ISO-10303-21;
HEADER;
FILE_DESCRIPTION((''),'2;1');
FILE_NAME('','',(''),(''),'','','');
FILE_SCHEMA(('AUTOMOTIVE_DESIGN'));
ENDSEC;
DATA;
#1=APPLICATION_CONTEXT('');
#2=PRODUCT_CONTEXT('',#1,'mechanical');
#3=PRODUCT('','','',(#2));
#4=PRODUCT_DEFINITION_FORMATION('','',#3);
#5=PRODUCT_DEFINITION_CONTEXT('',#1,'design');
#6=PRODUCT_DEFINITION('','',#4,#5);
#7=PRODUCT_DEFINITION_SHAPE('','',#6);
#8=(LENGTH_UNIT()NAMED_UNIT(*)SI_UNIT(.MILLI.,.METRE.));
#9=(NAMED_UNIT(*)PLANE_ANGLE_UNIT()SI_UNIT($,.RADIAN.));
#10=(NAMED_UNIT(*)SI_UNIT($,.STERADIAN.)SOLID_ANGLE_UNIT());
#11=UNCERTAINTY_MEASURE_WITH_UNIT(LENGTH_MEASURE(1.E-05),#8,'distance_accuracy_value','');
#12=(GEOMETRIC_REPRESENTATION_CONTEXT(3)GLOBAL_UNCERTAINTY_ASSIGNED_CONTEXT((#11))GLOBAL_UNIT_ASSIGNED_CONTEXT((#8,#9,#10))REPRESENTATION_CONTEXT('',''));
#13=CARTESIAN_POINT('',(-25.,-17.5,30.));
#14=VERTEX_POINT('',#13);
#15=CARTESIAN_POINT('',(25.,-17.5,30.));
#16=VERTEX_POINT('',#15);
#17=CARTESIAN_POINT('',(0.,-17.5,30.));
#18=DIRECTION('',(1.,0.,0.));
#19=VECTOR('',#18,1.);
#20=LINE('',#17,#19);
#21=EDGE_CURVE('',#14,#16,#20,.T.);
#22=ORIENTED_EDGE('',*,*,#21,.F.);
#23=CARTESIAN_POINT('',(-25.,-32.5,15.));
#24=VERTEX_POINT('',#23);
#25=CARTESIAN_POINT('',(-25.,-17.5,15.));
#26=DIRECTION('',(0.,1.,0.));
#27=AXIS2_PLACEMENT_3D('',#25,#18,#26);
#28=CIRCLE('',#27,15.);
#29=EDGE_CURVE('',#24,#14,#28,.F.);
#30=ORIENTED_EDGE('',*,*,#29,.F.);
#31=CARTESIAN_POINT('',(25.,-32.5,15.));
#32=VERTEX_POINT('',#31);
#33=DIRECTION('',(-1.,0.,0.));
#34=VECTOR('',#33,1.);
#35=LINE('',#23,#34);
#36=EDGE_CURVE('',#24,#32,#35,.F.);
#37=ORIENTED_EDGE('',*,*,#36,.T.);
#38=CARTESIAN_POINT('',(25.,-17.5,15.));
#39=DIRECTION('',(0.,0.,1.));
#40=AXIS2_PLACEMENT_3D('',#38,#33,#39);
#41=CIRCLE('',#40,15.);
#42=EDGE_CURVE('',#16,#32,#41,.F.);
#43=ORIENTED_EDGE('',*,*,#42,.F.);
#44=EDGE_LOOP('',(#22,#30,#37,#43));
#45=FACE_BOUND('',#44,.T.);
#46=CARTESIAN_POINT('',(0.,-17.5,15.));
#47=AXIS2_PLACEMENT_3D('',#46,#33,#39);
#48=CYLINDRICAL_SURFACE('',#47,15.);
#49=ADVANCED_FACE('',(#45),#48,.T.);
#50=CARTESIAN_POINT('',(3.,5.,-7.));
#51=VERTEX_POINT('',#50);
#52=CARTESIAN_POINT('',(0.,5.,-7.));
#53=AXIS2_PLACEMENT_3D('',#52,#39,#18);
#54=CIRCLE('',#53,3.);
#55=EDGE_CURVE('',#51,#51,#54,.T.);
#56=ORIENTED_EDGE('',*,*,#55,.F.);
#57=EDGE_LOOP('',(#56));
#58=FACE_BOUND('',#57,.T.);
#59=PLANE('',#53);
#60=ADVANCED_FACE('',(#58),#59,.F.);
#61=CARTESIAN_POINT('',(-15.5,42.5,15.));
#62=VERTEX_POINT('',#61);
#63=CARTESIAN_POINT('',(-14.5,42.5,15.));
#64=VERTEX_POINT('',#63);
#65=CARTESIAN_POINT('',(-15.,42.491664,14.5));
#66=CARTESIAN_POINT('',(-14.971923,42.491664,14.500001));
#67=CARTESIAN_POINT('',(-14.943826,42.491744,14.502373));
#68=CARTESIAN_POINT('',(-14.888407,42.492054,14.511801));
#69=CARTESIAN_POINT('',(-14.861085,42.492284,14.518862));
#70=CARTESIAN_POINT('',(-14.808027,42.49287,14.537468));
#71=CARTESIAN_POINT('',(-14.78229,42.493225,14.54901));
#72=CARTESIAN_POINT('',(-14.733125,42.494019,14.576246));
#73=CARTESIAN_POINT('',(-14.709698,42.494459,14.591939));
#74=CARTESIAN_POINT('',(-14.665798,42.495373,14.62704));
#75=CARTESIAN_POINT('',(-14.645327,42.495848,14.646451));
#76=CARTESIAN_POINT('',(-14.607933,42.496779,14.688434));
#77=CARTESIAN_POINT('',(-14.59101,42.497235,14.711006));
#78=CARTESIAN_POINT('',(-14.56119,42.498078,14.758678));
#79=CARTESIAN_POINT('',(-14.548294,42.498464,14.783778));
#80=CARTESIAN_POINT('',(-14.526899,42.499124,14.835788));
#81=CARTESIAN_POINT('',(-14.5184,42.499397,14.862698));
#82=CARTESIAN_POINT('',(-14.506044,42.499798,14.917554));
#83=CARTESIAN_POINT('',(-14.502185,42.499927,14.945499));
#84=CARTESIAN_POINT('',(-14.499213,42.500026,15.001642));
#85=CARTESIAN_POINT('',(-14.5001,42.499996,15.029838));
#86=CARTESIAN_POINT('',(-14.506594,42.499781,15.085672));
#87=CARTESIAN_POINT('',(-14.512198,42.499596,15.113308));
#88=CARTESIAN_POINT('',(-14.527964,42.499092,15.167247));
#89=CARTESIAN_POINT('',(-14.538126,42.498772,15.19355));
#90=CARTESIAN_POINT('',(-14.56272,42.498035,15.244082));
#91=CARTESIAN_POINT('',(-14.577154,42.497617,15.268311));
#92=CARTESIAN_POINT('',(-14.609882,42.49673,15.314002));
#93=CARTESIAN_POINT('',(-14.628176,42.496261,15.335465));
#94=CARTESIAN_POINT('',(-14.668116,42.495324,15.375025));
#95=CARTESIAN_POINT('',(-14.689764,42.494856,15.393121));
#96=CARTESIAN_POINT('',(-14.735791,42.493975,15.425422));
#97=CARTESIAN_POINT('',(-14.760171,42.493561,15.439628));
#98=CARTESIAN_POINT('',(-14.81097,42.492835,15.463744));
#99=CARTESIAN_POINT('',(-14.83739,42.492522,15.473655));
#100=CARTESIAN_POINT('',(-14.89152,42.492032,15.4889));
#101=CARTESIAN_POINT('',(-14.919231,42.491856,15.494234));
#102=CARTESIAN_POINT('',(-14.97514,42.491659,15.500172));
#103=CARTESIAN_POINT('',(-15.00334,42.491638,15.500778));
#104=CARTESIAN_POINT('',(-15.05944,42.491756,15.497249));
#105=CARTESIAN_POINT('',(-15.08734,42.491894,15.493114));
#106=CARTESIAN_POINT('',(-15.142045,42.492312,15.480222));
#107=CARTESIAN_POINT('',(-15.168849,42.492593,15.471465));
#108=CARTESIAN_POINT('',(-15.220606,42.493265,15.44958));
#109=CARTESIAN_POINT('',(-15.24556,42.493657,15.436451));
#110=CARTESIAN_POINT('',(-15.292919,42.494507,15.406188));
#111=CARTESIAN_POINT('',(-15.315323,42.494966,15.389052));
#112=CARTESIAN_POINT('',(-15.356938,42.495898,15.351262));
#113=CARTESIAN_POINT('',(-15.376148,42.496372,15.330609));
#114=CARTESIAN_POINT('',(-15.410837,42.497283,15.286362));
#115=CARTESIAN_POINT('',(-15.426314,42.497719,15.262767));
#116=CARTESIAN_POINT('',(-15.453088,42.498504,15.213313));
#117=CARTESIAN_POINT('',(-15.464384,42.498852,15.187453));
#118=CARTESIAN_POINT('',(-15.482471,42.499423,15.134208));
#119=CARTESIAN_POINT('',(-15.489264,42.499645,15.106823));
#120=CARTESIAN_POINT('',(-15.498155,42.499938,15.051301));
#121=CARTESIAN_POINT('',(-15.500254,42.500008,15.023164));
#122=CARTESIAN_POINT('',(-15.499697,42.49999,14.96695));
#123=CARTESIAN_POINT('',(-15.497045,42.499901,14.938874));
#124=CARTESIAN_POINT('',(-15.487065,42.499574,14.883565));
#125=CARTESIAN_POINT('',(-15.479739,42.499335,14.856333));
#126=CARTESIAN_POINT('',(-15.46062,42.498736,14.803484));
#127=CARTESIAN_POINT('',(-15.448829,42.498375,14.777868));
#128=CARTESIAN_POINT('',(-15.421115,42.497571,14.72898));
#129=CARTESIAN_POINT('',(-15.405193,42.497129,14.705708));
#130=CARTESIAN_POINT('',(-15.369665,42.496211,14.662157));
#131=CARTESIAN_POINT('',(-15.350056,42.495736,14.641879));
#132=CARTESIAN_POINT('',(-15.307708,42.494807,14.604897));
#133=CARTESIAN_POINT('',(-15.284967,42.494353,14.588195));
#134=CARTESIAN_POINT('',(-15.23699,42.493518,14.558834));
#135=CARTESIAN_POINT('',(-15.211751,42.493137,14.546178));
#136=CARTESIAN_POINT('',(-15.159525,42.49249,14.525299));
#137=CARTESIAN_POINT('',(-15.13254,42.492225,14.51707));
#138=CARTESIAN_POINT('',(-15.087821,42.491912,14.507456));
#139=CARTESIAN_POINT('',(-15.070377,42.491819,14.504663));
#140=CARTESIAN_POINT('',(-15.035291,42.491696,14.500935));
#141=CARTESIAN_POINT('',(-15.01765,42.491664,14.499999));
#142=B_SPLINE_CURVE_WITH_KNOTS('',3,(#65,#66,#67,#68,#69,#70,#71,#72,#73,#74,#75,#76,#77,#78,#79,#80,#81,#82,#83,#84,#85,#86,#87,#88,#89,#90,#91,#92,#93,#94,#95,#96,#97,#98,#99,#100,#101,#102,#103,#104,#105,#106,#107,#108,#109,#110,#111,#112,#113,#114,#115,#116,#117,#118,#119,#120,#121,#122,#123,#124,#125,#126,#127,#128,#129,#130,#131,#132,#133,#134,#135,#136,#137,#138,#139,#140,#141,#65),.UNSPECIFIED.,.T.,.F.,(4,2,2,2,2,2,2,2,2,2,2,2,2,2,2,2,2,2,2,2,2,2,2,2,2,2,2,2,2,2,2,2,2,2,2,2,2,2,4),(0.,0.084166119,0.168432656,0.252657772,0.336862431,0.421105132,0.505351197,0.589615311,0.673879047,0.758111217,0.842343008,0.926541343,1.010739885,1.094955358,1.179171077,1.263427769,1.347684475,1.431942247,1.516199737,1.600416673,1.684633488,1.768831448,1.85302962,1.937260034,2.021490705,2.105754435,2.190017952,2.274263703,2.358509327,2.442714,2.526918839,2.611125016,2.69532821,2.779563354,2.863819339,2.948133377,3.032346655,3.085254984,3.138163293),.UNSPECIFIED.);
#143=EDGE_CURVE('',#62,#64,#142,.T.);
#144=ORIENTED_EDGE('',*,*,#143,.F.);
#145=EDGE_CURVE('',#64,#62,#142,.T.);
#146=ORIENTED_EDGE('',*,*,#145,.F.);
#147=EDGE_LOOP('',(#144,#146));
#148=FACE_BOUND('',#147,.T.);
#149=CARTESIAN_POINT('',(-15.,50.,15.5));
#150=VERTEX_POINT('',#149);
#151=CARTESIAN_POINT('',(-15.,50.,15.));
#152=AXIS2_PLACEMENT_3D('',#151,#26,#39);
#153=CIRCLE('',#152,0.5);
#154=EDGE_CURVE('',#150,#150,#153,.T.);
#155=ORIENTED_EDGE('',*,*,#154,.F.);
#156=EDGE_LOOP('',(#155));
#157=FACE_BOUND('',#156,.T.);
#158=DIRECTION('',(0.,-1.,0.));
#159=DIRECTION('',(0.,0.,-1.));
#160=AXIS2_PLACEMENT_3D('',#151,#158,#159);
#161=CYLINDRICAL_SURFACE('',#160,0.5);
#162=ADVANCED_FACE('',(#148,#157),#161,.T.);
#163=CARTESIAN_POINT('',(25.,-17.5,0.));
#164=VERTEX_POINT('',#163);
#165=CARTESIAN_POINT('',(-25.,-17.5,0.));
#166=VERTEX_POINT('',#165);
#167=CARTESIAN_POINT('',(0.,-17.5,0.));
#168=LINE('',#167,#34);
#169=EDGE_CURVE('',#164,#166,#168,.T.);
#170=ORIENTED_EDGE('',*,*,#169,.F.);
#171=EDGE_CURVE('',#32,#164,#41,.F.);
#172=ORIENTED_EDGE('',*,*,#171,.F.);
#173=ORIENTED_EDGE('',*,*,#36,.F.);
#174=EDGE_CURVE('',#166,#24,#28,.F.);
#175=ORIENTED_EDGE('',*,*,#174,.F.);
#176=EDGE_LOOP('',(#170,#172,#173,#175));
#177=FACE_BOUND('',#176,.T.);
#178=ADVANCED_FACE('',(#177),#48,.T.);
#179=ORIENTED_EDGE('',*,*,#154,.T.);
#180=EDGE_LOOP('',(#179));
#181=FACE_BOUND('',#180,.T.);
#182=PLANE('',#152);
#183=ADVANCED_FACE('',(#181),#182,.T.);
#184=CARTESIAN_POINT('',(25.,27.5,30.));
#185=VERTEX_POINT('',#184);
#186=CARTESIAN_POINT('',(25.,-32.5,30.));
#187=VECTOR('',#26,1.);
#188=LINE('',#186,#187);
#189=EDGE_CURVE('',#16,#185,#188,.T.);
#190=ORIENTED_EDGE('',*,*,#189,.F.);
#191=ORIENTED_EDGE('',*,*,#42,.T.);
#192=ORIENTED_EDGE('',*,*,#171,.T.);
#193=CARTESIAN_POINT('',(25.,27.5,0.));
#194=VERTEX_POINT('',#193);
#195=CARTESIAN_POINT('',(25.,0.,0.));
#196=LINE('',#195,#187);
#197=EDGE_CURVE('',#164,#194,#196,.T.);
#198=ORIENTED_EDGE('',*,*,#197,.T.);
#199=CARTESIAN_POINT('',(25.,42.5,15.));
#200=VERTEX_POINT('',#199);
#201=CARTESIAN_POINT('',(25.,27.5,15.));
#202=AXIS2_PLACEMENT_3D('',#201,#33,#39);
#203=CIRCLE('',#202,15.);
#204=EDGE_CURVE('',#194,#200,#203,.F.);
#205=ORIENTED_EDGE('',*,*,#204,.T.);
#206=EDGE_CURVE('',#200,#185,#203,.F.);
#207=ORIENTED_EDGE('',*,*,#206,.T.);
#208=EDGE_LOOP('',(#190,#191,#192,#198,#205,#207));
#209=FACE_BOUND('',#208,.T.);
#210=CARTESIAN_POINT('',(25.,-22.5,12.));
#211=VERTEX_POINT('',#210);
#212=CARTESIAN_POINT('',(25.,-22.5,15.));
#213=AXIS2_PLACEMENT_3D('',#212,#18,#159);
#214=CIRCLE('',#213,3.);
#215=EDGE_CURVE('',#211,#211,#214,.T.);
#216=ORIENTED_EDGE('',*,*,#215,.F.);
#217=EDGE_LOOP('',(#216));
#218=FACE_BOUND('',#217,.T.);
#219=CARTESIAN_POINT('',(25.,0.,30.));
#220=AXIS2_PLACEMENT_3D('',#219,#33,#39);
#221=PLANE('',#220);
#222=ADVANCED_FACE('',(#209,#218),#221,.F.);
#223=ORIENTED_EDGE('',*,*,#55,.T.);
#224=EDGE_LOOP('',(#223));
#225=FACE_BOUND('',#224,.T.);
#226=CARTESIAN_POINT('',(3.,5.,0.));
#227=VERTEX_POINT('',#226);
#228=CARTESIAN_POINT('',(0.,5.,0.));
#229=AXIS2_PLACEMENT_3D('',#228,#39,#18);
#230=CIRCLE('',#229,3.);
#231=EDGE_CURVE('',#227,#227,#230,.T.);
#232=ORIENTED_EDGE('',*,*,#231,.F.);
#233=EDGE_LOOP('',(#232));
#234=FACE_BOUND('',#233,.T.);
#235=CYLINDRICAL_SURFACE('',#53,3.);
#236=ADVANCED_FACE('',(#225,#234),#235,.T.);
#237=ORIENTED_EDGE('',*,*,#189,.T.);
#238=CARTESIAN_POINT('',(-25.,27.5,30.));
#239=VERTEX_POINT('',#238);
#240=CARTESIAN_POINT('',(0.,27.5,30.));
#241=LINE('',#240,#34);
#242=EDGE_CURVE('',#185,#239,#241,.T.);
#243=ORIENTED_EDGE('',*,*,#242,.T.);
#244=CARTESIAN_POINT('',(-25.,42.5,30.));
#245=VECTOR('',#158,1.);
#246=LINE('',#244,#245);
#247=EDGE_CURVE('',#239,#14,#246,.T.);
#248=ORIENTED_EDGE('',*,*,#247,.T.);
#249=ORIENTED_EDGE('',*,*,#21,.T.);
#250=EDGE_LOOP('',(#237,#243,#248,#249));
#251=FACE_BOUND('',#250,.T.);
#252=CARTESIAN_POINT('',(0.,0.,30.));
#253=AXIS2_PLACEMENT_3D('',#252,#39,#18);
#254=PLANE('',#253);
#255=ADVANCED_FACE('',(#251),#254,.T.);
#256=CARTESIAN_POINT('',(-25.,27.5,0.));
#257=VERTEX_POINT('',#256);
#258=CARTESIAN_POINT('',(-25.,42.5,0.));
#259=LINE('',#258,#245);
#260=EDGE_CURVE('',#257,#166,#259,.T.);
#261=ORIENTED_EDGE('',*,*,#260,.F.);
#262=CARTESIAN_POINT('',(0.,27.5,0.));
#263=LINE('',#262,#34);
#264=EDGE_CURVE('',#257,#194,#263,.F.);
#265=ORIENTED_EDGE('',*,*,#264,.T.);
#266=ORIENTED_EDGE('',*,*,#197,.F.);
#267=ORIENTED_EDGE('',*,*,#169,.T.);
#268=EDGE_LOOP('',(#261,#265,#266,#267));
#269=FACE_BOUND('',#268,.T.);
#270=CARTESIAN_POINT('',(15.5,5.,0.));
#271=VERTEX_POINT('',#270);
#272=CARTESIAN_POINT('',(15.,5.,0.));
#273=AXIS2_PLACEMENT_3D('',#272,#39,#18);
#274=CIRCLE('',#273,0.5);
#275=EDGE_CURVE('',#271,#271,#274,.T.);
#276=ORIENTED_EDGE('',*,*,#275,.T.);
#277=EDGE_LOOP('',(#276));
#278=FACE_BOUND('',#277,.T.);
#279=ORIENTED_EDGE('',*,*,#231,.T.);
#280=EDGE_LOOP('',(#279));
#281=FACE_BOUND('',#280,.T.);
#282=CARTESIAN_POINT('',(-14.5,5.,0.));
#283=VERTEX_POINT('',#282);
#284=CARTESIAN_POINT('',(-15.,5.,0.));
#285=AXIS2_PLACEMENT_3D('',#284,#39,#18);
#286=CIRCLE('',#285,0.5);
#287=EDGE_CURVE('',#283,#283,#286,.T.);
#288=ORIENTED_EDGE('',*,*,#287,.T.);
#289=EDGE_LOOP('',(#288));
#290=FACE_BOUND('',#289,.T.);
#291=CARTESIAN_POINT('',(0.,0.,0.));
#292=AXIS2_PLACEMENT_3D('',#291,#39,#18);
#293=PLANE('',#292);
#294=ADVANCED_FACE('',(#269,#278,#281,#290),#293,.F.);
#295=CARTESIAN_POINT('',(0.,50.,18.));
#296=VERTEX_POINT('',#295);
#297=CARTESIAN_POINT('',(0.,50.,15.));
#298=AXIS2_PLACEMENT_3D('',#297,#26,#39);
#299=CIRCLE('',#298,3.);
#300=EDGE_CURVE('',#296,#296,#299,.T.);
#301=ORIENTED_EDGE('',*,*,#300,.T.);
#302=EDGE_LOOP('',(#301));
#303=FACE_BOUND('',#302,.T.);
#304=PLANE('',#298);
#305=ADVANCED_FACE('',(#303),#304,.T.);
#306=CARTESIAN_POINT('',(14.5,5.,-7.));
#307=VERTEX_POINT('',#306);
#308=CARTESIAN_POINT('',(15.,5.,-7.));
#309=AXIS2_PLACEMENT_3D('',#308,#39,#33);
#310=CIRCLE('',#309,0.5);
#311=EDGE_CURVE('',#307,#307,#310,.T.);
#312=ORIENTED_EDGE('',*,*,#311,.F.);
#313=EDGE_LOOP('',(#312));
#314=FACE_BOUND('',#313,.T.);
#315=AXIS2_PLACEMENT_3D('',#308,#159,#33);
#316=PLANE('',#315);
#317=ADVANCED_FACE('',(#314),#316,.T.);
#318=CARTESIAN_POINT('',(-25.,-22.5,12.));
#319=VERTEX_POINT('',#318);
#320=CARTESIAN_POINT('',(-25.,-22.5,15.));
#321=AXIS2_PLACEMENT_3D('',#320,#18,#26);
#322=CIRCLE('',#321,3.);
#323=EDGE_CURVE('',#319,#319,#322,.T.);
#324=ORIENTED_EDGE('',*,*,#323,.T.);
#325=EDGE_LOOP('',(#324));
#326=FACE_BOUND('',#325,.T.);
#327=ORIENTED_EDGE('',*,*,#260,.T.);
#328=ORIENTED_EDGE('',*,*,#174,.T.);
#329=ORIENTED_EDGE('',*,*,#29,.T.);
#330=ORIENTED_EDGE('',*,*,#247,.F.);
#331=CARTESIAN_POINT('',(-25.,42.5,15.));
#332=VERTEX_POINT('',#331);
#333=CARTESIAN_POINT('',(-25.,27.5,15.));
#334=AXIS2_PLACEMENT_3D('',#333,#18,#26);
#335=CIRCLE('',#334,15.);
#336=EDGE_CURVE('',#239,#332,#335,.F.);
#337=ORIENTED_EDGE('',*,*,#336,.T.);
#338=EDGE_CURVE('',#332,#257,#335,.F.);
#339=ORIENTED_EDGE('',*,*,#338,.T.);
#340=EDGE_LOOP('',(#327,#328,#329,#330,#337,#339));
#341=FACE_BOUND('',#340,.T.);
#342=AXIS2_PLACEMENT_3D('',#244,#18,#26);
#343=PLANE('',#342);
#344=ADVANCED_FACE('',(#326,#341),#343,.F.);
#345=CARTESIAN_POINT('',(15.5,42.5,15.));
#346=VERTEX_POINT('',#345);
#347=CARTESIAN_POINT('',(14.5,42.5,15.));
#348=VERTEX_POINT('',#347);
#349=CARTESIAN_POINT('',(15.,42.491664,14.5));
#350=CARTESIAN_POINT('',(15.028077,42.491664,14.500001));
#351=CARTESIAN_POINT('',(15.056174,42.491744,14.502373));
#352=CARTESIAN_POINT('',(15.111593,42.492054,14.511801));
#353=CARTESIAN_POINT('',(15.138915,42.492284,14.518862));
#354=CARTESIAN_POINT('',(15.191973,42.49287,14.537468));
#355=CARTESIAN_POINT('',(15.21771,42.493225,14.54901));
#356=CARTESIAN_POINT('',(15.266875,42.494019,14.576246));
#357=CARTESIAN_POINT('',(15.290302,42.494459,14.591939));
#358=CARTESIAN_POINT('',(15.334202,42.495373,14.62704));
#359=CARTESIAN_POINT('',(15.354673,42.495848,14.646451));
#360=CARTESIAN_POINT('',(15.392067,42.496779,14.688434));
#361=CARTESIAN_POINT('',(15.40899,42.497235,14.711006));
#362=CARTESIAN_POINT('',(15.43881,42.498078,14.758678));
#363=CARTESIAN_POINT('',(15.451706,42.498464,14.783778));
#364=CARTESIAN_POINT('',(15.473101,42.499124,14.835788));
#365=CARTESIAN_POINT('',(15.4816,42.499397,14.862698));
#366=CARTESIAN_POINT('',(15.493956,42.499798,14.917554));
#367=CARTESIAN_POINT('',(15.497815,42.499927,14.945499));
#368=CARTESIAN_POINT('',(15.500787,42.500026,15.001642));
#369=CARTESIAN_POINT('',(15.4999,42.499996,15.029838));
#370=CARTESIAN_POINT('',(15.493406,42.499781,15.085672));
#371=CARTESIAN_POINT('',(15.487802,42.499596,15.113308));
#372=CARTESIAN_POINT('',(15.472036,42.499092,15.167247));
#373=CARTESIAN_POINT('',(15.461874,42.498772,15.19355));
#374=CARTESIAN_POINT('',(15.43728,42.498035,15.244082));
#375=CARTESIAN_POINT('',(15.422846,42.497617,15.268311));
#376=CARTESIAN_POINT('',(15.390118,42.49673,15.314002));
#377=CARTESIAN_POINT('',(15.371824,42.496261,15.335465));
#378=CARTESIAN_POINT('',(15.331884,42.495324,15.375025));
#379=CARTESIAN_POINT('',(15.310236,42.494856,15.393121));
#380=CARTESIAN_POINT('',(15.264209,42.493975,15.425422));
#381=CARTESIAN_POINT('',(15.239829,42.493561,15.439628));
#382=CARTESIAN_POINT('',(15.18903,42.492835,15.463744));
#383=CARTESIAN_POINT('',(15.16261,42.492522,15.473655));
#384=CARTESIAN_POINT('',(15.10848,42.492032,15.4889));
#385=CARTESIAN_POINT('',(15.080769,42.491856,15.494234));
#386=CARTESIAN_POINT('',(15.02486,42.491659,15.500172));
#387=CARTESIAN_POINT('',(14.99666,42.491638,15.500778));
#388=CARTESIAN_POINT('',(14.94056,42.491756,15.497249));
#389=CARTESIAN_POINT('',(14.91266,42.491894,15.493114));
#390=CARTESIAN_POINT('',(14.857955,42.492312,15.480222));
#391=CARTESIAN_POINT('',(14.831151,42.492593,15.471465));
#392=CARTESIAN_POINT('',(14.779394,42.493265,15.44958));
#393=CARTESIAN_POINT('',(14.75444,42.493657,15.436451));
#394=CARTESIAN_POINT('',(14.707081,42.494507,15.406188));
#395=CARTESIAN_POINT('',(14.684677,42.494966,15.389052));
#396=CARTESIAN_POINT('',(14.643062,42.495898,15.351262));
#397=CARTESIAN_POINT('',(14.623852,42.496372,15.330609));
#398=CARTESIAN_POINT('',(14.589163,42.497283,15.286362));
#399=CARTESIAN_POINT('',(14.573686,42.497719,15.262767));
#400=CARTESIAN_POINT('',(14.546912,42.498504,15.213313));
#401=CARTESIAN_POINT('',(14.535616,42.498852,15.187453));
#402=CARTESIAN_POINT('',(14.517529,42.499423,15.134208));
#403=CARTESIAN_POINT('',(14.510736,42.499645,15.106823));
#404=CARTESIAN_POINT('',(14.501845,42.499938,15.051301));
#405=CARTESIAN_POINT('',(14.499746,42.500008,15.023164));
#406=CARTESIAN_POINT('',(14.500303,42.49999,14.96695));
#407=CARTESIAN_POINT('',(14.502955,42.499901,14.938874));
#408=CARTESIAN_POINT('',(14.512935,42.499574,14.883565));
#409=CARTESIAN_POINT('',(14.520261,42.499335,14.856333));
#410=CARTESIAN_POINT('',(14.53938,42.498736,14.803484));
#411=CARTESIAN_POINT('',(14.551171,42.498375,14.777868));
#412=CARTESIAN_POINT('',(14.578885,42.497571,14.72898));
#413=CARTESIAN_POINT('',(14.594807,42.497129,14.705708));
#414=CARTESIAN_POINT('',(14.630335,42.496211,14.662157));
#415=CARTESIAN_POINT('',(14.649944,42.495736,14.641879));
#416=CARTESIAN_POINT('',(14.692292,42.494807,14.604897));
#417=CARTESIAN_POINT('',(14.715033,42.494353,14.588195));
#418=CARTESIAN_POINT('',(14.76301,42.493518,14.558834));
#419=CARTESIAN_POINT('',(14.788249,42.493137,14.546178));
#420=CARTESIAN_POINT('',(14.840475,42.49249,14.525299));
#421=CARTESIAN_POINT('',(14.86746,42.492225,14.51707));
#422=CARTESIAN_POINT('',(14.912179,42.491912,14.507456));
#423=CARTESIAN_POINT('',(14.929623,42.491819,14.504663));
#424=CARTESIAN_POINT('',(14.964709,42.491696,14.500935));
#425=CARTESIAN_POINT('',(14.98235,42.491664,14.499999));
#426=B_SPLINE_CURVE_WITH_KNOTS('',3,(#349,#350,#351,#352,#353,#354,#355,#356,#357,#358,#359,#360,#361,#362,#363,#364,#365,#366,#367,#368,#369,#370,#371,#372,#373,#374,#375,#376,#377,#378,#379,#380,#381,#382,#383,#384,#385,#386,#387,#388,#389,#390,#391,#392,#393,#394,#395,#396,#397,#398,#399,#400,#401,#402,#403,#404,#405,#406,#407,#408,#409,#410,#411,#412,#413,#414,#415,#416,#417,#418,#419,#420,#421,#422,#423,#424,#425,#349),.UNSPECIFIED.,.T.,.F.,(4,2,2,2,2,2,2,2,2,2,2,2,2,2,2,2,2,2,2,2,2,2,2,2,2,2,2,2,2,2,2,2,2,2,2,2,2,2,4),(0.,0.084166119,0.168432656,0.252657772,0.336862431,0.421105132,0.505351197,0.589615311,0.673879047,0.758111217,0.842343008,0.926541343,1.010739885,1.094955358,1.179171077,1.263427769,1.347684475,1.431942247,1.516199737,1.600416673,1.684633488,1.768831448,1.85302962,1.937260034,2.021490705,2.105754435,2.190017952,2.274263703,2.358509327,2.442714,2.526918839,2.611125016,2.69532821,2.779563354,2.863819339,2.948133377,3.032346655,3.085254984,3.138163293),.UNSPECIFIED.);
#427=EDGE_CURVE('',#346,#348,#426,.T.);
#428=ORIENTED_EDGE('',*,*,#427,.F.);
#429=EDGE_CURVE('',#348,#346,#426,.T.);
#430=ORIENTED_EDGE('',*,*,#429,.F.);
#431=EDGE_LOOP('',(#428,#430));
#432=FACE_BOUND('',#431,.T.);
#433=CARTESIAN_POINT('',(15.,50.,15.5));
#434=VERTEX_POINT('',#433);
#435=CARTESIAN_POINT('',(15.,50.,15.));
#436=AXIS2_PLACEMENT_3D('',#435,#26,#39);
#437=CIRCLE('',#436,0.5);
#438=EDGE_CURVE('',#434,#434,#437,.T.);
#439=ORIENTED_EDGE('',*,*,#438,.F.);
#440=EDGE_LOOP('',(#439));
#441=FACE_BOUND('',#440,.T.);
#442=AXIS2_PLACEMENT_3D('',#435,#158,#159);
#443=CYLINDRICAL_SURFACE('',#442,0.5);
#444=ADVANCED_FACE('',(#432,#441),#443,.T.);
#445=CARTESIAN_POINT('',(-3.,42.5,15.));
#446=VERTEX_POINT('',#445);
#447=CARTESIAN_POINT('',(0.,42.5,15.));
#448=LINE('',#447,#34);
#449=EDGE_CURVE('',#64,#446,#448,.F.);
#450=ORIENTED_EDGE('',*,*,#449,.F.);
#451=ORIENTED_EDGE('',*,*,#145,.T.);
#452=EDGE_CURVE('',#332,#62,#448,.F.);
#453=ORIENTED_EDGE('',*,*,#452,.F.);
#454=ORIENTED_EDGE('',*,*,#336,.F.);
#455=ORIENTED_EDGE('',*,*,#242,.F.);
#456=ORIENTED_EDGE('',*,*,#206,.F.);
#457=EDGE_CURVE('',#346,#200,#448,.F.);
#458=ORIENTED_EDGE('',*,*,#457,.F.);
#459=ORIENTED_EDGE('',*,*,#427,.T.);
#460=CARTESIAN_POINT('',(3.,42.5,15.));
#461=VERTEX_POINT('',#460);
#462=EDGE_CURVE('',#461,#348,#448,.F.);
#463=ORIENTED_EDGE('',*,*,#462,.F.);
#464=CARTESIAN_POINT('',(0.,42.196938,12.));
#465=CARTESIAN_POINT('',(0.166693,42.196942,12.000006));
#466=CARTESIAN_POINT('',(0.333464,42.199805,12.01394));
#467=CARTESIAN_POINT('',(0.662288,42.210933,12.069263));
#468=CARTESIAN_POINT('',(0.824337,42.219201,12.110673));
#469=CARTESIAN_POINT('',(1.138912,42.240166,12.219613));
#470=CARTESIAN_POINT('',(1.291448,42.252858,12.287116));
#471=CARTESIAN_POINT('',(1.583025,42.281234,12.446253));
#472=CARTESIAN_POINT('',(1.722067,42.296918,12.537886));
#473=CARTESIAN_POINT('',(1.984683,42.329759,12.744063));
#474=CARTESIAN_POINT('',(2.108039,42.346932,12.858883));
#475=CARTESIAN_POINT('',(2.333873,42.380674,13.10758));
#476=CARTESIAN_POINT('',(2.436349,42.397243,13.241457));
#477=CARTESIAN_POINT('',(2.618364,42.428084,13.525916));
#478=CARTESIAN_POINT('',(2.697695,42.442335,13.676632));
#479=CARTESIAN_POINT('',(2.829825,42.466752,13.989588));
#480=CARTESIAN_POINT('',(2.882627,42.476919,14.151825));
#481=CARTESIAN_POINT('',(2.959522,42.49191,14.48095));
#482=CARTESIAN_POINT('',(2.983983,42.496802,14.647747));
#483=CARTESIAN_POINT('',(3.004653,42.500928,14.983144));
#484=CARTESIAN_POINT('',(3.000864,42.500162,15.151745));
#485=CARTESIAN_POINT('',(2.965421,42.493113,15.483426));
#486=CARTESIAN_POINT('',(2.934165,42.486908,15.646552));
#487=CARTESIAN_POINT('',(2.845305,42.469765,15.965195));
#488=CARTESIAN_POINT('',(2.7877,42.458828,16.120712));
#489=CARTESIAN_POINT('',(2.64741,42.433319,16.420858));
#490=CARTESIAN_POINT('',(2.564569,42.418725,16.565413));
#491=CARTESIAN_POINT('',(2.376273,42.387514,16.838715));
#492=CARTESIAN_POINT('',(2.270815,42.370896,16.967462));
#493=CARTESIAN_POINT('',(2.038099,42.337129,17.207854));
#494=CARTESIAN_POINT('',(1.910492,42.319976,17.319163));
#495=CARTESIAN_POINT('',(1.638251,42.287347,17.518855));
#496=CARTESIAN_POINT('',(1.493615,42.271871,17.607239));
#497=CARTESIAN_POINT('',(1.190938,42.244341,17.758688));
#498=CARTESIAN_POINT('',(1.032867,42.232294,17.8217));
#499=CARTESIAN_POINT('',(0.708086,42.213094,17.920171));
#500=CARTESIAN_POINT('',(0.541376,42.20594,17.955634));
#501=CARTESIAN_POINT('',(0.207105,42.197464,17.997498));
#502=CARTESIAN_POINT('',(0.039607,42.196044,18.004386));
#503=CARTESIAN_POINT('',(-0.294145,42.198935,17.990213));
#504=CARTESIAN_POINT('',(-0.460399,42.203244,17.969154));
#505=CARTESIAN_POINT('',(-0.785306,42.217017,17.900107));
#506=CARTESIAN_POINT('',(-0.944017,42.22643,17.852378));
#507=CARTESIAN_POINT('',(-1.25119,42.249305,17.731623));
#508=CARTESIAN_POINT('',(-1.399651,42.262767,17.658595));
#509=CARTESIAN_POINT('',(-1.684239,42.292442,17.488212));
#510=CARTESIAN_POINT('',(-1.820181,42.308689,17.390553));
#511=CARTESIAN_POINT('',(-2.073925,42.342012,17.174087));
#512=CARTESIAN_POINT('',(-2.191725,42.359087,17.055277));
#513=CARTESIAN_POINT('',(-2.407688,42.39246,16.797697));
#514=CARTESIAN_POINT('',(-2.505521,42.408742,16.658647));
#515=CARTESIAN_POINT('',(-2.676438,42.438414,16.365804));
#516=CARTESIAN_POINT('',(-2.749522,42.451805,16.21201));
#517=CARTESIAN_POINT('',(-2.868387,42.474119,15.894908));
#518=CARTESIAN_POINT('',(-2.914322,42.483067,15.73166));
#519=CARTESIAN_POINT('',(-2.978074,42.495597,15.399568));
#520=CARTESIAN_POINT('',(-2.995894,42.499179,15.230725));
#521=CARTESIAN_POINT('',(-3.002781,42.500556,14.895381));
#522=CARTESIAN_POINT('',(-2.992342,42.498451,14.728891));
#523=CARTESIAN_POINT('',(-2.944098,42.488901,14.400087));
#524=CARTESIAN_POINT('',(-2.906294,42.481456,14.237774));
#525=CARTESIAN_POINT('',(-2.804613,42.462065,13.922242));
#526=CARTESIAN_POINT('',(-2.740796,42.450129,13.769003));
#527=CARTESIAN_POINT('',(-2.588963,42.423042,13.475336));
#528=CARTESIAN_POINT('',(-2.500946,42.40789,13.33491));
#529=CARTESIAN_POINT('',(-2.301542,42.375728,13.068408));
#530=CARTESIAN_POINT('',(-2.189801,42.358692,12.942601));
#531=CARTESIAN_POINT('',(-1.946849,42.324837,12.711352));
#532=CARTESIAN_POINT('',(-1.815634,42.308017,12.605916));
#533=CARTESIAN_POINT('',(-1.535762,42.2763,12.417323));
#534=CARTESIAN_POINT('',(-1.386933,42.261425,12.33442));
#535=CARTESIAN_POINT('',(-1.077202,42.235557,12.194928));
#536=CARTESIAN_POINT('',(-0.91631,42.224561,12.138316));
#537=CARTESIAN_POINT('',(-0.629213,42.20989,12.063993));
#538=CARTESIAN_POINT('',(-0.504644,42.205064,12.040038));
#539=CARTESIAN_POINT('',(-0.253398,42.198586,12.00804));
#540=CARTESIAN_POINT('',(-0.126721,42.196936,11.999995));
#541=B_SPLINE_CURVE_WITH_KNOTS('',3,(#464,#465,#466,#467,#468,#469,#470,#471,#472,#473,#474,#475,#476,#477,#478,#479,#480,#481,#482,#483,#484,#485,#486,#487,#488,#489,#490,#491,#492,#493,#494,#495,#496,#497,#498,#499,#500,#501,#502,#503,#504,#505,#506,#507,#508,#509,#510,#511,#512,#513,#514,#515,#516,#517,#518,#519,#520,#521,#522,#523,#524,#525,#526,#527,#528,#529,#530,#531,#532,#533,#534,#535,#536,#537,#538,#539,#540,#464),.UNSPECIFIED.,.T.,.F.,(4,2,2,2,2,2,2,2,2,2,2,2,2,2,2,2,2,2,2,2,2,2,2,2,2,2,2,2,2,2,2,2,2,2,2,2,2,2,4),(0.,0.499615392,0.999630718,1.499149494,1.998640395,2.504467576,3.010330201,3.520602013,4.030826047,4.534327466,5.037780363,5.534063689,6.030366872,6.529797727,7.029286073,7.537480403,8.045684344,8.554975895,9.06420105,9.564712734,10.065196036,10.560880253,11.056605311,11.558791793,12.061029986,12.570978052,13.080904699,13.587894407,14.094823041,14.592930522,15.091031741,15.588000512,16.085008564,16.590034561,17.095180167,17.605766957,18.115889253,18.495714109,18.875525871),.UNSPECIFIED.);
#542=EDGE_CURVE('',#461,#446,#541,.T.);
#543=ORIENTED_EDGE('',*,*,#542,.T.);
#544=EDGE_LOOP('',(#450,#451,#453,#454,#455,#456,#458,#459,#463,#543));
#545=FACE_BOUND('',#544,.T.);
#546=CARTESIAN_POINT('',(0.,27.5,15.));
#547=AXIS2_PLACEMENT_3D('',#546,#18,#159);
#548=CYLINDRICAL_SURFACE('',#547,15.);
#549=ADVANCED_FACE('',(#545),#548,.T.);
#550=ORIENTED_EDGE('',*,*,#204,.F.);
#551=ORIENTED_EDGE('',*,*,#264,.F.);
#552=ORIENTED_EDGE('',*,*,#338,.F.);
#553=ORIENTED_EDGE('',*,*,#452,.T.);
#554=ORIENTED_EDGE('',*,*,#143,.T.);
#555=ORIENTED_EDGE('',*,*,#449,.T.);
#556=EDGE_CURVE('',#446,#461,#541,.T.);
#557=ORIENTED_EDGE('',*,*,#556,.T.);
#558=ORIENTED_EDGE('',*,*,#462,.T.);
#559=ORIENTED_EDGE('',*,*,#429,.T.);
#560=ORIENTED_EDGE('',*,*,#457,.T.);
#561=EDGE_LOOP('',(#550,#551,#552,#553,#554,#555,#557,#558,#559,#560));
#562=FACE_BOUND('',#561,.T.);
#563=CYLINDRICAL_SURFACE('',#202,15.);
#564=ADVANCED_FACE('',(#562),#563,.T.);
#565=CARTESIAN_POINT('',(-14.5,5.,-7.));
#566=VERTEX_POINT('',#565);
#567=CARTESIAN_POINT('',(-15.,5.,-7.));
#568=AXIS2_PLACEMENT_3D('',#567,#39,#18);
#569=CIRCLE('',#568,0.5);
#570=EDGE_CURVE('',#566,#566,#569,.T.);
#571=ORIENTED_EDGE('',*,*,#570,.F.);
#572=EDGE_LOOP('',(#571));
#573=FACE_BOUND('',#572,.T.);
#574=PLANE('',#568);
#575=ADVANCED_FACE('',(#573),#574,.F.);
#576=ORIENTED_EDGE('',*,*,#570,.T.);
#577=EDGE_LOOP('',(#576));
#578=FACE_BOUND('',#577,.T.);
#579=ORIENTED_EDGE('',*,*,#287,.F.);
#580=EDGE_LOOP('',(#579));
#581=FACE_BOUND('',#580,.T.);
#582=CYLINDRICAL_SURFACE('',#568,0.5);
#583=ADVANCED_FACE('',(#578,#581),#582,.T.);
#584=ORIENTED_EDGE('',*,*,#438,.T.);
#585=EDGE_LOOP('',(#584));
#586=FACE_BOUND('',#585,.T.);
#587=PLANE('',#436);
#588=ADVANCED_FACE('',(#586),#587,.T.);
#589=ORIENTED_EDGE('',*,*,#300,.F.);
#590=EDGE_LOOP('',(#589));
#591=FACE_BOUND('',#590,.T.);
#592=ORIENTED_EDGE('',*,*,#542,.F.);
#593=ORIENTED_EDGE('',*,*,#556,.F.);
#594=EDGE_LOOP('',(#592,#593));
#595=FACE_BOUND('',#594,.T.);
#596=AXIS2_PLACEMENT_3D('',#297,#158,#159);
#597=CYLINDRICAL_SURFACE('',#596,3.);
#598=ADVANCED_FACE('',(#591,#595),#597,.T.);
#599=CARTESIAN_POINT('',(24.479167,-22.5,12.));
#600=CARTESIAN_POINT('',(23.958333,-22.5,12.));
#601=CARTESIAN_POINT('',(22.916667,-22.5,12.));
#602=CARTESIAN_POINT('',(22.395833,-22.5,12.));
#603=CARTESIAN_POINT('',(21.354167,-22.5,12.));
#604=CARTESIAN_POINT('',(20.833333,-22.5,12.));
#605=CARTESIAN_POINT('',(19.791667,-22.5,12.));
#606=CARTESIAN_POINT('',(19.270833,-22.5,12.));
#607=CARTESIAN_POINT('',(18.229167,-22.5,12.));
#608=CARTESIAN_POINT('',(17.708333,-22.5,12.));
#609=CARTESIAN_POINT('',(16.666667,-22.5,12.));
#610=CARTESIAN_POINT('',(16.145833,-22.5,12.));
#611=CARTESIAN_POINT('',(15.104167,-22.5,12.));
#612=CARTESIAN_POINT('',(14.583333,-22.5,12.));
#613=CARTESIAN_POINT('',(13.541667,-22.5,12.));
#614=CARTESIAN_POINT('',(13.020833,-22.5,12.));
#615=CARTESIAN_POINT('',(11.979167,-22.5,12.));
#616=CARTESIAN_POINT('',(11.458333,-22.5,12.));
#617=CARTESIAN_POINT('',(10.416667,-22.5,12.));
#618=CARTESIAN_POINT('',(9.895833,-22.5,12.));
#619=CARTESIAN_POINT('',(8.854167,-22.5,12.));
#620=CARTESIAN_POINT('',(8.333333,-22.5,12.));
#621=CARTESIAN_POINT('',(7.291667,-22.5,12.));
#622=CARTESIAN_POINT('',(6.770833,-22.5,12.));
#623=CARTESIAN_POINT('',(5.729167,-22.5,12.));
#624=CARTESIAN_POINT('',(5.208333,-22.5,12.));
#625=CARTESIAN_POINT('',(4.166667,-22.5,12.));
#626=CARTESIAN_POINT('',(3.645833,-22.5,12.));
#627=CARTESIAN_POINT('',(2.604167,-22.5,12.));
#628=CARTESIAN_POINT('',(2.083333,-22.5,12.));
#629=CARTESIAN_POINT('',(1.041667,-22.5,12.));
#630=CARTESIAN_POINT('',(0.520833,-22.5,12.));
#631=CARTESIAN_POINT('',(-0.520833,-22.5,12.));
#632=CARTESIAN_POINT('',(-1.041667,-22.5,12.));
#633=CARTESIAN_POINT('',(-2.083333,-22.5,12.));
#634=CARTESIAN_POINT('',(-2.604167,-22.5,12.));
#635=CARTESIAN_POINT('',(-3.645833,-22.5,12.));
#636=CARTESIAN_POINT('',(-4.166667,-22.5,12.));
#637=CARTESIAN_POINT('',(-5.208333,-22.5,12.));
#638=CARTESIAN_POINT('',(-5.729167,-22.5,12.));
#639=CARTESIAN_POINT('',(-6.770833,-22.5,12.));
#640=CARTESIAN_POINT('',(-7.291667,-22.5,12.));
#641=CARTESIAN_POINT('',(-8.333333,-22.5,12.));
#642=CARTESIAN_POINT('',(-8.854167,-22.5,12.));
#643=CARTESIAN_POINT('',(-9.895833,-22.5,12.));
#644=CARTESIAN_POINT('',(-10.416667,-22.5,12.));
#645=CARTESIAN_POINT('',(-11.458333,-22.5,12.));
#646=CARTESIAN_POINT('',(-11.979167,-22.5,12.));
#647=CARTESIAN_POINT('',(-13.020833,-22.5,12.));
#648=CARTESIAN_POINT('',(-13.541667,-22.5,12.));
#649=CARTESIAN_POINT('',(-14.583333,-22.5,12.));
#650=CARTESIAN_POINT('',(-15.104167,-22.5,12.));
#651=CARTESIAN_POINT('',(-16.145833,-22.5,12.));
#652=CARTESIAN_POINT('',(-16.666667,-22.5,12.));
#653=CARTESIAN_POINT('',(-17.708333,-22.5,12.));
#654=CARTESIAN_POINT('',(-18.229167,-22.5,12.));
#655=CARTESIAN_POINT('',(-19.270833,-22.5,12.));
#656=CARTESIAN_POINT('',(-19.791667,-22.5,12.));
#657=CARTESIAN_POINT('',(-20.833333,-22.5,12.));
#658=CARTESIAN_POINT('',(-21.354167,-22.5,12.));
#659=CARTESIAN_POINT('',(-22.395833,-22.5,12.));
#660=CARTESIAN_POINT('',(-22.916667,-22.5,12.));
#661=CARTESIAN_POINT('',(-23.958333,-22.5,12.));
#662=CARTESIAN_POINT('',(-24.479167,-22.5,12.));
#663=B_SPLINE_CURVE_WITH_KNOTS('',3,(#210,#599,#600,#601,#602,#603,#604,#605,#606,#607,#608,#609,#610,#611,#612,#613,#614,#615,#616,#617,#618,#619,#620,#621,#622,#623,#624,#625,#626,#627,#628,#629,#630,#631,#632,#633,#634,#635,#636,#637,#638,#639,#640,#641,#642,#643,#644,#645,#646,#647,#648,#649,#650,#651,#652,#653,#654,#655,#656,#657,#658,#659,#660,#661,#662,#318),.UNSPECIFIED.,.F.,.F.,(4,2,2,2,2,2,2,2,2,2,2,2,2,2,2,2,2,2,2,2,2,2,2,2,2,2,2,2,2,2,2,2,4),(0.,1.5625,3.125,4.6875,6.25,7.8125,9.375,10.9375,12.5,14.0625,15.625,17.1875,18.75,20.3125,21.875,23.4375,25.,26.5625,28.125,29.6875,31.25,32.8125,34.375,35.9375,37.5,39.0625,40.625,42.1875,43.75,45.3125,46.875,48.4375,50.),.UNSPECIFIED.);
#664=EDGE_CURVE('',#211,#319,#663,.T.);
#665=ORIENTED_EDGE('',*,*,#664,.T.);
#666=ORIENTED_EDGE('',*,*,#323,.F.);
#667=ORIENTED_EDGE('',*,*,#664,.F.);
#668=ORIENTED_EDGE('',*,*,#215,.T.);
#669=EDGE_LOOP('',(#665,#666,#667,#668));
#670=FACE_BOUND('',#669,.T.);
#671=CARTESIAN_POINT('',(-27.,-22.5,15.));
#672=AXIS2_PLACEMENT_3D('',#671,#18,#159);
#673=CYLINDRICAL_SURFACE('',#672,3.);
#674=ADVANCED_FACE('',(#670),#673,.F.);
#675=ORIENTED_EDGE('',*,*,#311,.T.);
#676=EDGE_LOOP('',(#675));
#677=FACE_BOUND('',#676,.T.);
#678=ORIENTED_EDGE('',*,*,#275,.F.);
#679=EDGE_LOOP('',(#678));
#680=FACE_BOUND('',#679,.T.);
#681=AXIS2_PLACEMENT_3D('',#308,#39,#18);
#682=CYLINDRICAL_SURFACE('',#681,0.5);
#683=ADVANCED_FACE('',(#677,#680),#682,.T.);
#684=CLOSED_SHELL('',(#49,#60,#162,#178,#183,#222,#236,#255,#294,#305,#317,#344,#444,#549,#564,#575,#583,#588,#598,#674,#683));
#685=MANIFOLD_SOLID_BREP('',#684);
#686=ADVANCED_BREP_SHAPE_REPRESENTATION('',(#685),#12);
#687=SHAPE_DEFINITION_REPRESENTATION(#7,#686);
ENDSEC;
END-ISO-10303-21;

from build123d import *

# Parameters (mm, degrees)
EXTRUDE_1_DEPTH     = 30
SKETCH_2_R          = 3
CUT_EXTRUDE_1_DEPTH = 52
FILLET_1_R          = 15
FILLET_2_R          = 15
FILLET_3_R          = 15
FILLET_4_R          = 15
SKETCH_4_R          = 3
SKETCH_4_R_2        = 0.5
EXTRUDE_2_DEPTH     = 50
SKETCH_5_R          = 3
SKETCH_5_R_2        = 0.5
EXTRUDE_3_DEPTH     = 37


with BuildPart() as part:
    # 草图1 → 凸台-拉伸1 (new body)
    with BuildSketch(Plane.XY):
        Polygon((25, 0), (25, 42.5), (-25, 42.5), (-25, -32.5), (25, -32.5), align=None)
    extrude(amount=EXTRUDE_1_DEPTH)

    # 草图2 → 切除-拉伸1 (cut)
    with BuildSketch(Plane(origin=(25, 0, 0), x_dir=(0, 0, -1), z_dir=(1, 0, 0))):
        with Locations((-15, -22.5)):
            Circle(SKETCH_2_R)
    extrude(amount=-CUT_EXTRUDE_1_DEPTH, mode=Mode.SUBTRACT)

    # 圆角1
    fillet_1_edges = [part.edges().sort_by_distance(p)[0] for p in [
        (0, -32.5, 0),
    ]]
    fillet(fillet_1_edges, radius=FILLET_1_R)

    # 圆角2
    fillet_2_edges = [part.edges().sort_by_distance(p)[0] for p in [
        (0, -32.5, 30),
    ]]
    fillet(fillet_2_edges, radius=FILLET_2_R - 0.0001)  # a hair under: the kernel refuses the full size

    # 圆角3
    fillet_3_edges = [part.edges().sort_by_distance(p)[0] for p in [
        (0, 42.5, 30),
    ]]
    fillet(fillet_3_edges, radius=FILLET_3_R)

    # 圆角4
    fillet_4_edges = [part.edges().sort_by_distance(p)[0] for p in [
        (0, 42.5, 0),
    ]]
    fillet(fillet_4_edges, radius=FILLET_4_R - 0.0001)  # a hair under: the kernel refuses the full size

    # 草图4 → 凸台-拉伸2 (add)
    with BuildSketch(Plane(origin=(0, 0, 0), x_dir=(1, 0, 0), z_dir=(0, 1, 0))):
        with Locations((0, -15)):
            Circle(SKETCH_4_R)
        with Locations((15, -15)):
            Circle(SKETCH_4_R_2)
        with Locations((-15, -15)):
            Circle(SKETCH_4_R_2)
    extrude(amount=EXTRUDE_2_DEPTH)

    # 草图5 → 凸台-拉伸3 (add)
    with BuildSketch(Plane.XY.offset(30)):
        with Locations((0, 5)):
            Circle(SKETCH_5_R)
        with Locations((-15, 5)):
            Circle(SKETCH_5_R_2)
        with Locations((15, 5)):
            Circle(SKETCH_5_R_2)
    extrude(amount=-EXTRUDE_3_DEPTH)


solid = part.part
